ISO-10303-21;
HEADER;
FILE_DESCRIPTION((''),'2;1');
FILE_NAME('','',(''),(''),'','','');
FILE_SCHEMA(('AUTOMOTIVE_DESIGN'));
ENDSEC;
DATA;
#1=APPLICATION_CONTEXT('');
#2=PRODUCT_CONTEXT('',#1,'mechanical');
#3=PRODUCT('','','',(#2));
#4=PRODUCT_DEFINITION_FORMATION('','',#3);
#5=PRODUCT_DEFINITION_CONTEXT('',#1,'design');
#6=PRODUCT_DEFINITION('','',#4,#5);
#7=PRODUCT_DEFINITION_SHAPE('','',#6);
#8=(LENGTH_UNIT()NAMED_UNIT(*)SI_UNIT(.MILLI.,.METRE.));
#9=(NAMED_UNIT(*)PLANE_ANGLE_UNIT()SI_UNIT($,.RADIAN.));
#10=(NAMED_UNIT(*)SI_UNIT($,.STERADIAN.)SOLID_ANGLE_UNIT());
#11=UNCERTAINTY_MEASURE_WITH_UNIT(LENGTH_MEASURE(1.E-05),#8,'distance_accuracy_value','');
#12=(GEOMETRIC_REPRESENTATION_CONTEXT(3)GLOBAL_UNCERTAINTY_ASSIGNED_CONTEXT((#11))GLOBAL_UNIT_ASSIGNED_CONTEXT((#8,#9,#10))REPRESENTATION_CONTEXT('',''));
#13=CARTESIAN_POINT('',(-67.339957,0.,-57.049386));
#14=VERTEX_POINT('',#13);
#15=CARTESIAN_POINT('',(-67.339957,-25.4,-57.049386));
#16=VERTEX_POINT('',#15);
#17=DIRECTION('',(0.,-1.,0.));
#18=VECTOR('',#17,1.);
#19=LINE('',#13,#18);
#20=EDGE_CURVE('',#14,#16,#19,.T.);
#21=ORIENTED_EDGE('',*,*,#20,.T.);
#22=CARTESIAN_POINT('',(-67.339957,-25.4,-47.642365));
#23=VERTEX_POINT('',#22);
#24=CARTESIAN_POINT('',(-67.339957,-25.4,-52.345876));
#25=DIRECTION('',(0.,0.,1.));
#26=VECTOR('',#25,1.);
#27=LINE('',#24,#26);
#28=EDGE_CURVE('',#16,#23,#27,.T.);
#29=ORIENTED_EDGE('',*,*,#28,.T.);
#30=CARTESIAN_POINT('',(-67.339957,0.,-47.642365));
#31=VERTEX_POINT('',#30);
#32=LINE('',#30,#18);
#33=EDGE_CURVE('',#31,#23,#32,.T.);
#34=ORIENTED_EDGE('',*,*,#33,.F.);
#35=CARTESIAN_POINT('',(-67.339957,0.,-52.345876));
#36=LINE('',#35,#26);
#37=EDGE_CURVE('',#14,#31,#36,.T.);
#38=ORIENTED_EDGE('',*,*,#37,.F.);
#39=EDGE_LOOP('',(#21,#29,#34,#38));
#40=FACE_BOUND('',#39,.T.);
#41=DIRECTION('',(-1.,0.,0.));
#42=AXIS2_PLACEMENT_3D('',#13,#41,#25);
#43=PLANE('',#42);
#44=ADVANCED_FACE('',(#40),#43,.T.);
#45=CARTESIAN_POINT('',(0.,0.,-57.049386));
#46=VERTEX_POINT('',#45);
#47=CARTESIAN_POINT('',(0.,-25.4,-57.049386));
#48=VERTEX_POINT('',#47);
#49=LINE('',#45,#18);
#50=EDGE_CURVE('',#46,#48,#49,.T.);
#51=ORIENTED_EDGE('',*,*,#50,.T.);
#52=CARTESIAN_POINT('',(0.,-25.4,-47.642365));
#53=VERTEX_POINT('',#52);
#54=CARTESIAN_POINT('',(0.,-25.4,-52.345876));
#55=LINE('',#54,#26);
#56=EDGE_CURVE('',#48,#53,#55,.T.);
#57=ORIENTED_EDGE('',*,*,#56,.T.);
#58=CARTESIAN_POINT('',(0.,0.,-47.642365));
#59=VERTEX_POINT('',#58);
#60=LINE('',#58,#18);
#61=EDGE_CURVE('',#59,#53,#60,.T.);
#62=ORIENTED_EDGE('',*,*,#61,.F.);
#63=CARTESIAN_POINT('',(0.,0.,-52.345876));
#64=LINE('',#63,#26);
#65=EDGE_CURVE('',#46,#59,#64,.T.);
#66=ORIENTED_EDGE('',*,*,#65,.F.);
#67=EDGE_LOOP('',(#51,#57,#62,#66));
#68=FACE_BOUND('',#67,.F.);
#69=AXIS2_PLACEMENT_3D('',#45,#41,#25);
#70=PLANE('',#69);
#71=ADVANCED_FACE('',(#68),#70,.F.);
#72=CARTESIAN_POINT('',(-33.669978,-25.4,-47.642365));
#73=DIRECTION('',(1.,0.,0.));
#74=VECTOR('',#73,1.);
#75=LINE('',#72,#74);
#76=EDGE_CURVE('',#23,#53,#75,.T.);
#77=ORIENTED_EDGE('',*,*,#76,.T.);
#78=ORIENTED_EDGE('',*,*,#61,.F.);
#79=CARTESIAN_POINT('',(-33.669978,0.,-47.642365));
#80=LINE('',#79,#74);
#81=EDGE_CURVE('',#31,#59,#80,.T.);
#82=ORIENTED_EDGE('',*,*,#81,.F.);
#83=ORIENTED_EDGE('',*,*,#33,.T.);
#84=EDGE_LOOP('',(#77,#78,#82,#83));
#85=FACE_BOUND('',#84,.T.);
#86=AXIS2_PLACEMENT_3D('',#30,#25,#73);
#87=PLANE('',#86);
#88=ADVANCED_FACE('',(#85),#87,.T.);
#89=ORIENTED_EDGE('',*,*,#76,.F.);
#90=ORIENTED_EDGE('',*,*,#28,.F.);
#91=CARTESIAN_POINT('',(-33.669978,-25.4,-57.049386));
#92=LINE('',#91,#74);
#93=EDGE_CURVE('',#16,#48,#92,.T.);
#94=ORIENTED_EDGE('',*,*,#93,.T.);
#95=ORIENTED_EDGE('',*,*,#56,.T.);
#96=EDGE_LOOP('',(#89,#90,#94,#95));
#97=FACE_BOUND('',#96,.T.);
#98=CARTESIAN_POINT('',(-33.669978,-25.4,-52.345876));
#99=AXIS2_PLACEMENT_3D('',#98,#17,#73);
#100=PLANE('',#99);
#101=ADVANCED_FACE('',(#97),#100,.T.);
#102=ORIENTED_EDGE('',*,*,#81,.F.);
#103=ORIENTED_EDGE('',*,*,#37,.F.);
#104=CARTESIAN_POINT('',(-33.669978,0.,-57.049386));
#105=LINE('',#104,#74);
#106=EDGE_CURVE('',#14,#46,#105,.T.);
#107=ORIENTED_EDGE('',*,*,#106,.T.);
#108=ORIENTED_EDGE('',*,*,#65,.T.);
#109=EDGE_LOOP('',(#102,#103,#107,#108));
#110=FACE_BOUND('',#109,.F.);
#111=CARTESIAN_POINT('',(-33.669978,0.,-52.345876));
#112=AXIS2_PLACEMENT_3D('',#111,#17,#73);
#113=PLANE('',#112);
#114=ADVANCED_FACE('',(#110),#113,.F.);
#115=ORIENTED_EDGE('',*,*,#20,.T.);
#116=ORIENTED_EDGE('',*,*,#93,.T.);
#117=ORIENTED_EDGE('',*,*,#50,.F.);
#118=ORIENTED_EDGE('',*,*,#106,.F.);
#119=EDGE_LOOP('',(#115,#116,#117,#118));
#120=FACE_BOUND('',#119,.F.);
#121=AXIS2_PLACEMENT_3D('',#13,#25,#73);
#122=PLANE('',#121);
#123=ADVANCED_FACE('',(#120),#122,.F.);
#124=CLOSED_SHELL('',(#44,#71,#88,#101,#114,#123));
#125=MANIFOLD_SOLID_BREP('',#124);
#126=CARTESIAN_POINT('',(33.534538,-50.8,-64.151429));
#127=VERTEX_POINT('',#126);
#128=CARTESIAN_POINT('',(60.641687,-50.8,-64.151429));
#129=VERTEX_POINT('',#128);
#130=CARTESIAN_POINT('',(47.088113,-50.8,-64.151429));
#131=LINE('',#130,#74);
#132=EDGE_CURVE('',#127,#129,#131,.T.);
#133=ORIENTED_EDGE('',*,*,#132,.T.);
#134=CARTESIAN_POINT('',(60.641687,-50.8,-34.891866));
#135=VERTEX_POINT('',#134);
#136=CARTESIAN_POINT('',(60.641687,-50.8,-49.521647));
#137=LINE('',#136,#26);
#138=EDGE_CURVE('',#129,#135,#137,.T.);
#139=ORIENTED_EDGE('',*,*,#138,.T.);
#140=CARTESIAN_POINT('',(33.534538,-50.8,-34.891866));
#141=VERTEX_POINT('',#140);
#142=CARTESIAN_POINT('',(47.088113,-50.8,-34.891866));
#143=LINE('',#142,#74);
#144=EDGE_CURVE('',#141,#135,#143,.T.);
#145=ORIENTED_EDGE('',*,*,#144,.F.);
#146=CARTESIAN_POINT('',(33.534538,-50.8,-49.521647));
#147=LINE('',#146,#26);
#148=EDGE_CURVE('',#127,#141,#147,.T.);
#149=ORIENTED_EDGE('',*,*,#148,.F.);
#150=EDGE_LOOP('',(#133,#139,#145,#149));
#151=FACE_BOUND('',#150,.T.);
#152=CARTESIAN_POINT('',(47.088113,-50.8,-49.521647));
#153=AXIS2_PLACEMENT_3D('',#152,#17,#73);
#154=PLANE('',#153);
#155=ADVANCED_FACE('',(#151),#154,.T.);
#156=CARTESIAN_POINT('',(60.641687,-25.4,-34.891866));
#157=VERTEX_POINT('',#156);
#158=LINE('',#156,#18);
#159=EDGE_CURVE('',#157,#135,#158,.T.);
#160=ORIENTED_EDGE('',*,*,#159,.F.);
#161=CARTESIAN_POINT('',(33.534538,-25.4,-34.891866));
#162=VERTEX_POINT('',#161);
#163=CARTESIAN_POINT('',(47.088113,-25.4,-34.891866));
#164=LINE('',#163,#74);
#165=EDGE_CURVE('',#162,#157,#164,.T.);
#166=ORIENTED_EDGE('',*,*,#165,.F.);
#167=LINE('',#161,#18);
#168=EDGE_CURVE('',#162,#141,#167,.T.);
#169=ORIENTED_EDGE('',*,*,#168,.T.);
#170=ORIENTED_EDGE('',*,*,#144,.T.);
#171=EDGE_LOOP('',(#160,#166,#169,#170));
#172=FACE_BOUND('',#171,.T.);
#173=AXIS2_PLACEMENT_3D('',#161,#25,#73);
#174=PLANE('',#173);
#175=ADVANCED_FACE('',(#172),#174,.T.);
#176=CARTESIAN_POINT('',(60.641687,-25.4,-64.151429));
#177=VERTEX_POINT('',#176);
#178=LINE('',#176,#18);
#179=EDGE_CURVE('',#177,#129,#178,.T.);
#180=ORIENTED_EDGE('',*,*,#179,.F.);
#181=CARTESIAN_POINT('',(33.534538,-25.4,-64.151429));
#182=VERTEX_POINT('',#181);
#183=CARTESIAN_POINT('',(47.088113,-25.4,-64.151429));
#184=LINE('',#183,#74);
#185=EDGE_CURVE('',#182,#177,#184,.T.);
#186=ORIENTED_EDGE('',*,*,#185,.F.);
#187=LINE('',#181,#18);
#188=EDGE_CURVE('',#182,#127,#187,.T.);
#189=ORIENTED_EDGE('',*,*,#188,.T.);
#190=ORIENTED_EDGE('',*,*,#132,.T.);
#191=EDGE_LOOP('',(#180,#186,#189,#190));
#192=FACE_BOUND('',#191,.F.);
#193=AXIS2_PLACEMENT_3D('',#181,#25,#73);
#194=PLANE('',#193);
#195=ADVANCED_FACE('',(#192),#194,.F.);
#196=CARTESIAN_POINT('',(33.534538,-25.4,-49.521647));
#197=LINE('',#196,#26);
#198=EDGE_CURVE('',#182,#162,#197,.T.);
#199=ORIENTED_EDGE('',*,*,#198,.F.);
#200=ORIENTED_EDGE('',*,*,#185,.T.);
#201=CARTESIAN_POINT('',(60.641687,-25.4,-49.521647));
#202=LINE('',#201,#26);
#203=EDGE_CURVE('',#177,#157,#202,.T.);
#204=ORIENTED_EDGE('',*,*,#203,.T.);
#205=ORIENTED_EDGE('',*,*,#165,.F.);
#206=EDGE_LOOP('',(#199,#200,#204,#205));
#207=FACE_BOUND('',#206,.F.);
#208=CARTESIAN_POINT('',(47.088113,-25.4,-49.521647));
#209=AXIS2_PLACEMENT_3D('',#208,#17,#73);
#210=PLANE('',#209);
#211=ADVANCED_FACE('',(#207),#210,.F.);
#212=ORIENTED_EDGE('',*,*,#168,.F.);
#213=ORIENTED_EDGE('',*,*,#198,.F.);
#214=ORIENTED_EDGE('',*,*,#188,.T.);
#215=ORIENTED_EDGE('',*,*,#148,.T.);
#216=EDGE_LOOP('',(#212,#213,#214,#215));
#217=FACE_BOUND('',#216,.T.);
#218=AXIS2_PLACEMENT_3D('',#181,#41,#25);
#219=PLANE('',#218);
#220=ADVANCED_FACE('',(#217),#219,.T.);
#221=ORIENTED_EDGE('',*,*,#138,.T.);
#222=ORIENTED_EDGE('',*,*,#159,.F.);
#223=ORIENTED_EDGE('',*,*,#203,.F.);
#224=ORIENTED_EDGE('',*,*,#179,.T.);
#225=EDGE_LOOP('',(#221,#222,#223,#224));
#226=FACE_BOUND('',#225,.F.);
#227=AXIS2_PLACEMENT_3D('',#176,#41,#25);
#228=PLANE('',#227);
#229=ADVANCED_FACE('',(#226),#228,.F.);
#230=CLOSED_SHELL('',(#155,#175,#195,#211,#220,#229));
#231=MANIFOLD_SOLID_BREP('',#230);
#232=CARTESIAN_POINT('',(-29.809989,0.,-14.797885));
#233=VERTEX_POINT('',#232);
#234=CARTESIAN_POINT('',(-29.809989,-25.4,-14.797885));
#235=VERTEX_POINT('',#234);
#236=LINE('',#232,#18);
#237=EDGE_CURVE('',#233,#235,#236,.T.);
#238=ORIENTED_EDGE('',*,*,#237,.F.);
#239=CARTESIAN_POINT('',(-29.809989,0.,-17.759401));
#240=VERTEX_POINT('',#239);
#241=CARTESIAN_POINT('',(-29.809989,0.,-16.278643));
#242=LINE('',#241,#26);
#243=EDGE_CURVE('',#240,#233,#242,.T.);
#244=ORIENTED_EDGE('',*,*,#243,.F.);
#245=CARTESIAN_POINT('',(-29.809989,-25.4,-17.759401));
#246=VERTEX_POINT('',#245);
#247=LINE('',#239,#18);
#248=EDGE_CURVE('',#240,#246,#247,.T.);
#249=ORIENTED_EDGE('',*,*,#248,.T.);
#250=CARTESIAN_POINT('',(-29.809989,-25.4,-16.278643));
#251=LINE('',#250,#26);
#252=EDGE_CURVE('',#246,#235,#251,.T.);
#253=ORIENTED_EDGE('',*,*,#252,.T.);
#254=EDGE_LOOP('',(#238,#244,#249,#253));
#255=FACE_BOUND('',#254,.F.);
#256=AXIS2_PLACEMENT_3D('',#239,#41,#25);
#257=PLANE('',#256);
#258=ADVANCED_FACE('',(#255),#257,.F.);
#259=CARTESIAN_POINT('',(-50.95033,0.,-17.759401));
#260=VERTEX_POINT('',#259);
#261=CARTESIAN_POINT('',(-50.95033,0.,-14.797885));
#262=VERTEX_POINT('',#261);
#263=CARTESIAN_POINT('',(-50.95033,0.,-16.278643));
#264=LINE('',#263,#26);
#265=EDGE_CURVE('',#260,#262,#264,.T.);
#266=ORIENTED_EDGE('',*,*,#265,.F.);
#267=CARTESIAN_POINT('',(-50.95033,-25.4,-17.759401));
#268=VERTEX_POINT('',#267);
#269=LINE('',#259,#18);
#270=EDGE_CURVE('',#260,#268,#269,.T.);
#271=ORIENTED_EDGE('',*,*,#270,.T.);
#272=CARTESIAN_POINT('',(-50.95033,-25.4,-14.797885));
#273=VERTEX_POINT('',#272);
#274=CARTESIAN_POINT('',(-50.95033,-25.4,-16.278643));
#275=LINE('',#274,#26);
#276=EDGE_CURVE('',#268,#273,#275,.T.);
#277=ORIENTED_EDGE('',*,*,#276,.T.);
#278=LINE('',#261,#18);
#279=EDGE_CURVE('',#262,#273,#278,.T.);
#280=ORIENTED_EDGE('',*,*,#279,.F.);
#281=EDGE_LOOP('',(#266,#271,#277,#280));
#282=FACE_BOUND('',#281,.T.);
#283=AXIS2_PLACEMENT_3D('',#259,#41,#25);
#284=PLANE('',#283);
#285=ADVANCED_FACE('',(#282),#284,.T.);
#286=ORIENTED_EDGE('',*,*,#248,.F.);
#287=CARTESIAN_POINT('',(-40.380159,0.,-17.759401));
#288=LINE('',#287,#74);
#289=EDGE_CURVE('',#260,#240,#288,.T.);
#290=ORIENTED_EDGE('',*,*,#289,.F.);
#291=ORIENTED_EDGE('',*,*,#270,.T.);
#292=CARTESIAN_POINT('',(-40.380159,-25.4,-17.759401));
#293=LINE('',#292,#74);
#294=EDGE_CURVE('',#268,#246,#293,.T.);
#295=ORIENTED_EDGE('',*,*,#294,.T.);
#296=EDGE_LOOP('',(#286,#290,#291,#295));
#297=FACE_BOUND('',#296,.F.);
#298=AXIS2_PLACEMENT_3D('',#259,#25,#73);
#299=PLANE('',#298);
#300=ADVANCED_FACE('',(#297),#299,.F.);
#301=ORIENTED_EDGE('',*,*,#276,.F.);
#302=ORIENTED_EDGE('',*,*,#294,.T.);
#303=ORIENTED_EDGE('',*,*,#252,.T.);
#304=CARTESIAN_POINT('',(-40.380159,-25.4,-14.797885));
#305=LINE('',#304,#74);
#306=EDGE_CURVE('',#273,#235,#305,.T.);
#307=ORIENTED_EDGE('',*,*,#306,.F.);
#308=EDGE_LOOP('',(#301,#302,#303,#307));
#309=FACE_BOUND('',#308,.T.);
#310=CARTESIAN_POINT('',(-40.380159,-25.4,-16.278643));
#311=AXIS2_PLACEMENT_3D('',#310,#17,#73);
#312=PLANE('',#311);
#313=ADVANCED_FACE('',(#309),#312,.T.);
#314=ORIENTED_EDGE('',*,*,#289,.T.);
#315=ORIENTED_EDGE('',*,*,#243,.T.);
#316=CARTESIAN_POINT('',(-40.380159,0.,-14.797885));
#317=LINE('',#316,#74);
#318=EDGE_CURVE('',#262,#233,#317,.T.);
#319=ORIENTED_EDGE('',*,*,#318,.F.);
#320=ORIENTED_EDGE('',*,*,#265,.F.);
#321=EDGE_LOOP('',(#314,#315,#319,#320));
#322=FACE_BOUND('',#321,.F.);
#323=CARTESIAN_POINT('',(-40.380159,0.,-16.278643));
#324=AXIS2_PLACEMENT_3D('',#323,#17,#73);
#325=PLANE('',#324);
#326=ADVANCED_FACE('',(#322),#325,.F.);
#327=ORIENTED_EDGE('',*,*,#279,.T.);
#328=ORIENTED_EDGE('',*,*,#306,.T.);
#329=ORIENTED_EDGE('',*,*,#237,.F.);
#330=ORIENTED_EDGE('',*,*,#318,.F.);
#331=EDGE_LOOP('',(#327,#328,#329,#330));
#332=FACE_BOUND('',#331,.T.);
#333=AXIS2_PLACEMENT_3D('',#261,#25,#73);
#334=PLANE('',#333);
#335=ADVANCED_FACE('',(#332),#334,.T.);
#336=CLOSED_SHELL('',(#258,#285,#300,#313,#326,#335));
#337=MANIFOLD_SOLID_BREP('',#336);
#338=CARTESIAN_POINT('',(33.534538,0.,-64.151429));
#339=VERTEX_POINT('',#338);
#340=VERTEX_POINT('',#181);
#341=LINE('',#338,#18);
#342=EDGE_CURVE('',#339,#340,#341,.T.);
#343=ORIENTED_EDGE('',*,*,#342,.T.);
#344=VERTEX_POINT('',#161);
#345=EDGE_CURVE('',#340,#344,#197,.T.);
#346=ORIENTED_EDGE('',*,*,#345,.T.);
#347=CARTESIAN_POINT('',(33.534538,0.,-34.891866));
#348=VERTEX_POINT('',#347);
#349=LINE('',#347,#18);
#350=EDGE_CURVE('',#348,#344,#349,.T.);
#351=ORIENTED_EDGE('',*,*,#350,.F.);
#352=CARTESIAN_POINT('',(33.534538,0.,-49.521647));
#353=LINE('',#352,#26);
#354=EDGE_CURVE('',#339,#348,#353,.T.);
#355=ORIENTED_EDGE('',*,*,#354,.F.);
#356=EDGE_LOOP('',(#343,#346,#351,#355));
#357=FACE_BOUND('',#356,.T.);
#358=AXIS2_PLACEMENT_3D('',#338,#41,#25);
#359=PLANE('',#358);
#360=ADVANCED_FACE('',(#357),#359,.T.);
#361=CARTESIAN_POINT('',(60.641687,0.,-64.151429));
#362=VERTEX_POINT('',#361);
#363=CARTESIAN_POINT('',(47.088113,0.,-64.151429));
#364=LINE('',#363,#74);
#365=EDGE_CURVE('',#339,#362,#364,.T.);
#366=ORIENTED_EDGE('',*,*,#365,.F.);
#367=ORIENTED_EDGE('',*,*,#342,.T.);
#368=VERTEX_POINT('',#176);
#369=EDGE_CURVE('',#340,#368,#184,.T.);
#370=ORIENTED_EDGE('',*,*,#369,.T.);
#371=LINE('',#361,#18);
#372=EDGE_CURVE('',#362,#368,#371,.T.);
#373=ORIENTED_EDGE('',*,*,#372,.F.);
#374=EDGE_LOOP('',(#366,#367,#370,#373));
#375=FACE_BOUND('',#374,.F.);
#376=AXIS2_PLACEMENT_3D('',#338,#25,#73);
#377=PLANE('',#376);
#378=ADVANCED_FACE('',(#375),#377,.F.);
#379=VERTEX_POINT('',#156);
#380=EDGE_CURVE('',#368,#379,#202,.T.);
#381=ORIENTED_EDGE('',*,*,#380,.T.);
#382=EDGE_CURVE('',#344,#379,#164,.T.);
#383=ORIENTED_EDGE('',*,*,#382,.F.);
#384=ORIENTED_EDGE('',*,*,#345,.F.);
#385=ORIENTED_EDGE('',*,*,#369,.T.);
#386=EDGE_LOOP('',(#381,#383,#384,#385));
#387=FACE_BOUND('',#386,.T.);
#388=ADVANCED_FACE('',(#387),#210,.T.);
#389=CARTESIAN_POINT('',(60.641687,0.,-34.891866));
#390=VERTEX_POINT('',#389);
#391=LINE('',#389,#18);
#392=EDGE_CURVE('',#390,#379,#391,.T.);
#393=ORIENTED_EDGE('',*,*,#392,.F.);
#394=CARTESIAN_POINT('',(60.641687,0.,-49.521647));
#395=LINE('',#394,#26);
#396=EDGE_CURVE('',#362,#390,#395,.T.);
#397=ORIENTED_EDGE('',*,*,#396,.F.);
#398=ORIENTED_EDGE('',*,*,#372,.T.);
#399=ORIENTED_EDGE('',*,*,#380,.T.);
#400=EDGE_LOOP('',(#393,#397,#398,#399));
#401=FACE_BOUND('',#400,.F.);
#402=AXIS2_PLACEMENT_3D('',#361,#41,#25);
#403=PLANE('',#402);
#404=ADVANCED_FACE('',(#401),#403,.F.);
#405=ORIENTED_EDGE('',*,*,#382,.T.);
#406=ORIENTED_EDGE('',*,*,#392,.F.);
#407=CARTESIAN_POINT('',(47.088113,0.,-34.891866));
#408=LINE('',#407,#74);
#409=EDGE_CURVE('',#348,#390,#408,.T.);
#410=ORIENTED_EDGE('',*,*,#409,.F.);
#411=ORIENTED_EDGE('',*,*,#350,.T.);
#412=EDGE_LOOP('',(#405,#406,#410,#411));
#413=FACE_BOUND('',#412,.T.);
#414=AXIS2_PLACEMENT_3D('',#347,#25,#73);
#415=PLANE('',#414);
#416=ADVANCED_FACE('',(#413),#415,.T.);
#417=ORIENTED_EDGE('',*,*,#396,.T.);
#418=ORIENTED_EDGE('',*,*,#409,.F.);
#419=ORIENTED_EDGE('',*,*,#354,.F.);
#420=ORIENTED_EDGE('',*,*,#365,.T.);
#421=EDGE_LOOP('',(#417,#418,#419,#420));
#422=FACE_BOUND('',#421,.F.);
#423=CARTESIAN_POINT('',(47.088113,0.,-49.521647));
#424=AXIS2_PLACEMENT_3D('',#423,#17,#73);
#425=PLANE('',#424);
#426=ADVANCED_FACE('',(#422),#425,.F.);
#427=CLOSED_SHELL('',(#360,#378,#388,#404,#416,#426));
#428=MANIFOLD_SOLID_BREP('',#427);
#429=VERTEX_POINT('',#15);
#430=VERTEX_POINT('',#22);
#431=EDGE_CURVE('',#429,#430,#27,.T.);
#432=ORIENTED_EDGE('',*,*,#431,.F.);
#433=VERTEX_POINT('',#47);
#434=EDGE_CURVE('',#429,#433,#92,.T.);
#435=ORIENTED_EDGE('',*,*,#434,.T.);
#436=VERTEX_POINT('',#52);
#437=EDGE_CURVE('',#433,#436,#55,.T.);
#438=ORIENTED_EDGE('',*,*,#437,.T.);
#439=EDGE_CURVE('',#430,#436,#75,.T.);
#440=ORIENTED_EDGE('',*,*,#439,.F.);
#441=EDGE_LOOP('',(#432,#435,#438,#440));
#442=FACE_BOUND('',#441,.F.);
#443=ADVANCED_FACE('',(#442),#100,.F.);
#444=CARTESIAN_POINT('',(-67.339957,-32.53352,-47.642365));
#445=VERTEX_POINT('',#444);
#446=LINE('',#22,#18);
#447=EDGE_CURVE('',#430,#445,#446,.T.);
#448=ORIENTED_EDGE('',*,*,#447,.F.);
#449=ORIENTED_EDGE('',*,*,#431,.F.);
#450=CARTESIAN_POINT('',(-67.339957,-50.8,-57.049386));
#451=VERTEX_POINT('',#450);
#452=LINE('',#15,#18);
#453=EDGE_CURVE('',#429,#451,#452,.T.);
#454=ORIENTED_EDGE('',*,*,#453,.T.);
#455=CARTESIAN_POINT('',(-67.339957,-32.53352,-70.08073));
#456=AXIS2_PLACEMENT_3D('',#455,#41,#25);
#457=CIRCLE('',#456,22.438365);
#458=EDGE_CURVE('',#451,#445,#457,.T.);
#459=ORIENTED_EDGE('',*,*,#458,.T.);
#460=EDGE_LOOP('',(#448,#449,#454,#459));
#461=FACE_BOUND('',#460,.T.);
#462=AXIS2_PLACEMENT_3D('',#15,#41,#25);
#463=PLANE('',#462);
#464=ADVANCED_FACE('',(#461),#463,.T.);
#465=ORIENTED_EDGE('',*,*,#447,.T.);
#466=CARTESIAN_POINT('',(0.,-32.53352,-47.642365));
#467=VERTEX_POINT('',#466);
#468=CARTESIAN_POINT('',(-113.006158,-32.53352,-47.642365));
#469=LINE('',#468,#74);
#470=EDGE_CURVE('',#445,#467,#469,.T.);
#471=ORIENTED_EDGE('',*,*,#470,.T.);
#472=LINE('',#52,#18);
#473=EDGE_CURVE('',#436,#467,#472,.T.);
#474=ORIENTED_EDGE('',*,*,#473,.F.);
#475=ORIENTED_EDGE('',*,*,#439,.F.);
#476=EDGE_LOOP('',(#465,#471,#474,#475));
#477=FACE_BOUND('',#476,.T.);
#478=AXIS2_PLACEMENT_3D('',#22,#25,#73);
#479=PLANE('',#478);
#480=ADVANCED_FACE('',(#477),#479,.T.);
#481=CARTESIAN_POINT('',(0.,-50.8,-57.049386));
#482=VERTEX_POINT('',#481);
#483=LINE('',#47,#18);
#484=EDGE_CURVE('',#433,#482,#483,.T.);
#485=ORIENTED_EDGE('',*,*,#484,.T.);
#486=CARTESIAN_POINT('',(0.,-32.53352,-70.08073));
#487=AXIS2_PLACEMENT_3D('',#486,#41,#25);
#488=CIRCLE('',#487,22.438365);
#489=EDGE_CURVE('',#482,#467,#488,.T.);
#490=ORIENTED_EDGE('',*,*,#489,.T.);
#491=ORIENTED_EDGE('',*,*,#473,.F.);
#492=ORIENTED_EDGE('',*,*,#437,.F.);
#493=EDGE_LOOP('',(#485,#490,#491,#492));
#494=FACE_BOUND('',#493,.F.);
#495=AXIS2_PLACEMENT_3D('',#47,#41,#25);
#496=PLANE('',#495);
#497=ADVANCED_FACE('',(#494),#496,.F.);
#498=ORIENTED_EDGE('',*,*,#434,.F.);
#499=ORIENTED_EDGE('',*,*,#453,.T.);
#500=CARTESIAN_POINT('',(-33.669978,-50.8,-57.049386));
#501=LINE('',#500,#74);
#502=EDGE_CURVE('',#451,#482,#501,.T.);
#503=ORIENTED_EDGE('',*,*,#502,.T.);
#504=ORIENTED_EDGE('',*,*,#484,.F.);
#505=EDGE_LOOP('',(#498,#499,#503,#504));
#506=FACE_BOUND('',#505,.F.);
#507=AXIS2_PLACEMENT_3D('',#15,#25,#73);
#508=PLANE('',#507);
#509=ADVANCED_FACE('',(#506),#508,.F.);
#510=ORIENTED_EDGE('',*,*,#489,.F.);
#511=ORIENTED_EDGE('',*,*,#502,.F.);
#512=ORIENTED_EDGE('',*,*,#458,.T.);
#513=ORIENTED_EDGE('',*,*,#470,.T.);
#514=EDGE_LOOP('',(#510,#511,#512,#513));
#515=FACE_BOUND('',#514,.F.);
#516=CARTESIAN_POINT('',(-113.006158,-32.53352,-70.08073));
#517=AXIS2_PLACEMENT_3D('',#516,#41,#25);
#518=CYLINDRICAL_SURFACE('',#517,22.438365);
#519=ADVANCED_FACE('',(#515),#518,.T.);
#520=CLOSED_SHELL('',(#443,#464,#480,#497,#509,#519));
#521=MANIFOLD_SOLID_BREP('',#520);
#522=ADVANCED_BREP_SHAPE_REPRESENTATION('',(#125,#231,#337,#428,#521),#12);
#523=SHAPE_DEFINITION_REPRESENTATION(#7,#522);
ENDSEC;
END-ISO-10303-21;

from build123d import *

# Parameters (mm, degrees)
F0_W        = 67.3399567604
F0_H        = 9.4070211053
F1_DEPTH    = 25.4
F0_W_2      = 21.1403407156
F0_H_2      = 2.9615163803
F0_W_3      = 27.1071493626
F0_H_3      = 29.2595624924
F2_DEPTH    = 25.4
F3_T1_DEPTH = 158.6723585187


# Not quite as in the source:
# - a fillet or chamfer that OpenCascade refuses, or shapes differently, is made with other operations: its cross-section is extruded or revolved along the edge and cut away or added


with BuildPart() as f1:
    # F0 (on Front) → F1 (new body)
    with BuildSketch(Plane.XZ):
        with Locations((-33.6699783802, -52.3458756506)):
            Rectangle(F0_W, F0_H)
    extrude(amount=F1_DEPTH)


with BuildPart() as f1b:
    # F0 (on Front) → F1, piece 2 (new body)
    with BuildSketch(Plane.XZ):
        with Locations((-40.380159393, -16.2786431611)):
            Rectangle(F0_W_2, F0_H_2)
    extrude(amount=F1_DEPTH)


with BuildPart() as f1c:
    # F0 (on Front) → F1, piece 3 (new body)
    with BuildSketch(Plane.XZ):
        with Locations((47.0881126821, -49.5216473937)):
            Rectangle(F0_W_3, F0_H_3)
    extrude(amount=F1_DEPTH)


with BuildPart() as f2:
    # F2 (new): a face of the model
    f2_faces = [f1c.part.faces().sort_by_distance(p)[0] for p in [
        (47.0881126821, -25.4, -49.5216473937),
    ]]
    extrude(f2_faces, amount=F2_DEPTH)


with BuildPart() as f2b:
    # F2#2 (new): a face of the model
    f2_2_faces = [f1.part.faces().sort_by_distance(p)[0] for p in [
        (-33.6699783802, -25.4, -52.3458756506),
    ]]
    extrude(f2_2_faces, amount=F2_DEPTH)

    # F3: fillet of radius 22.4383652268 on 1 edges, made by hand

    # F3_s2 → F3_t1 (cut)
    with BuildSketch(Plane.YZ.offset(-113.0061576395)):
        with BuildLine():
            ThreePointArc((-32.5335196483, -47.642365098), (-42.8067415202, -50.1322680677), (-50.8, -57.0493862033))
            Line((-50.8, -57.0493862033), (-50.8, -47.642365098))
            Line((-50.8, -47.642365098), (-32.5335196483, -47.642365098))
        make_face()
    extrude(amount=F3_T1_DEPTH, mode=Mode.SUBTRACT)


solid = Compound([f1.part, f1b.part, f1c.part, f2.part, f2b.part])
